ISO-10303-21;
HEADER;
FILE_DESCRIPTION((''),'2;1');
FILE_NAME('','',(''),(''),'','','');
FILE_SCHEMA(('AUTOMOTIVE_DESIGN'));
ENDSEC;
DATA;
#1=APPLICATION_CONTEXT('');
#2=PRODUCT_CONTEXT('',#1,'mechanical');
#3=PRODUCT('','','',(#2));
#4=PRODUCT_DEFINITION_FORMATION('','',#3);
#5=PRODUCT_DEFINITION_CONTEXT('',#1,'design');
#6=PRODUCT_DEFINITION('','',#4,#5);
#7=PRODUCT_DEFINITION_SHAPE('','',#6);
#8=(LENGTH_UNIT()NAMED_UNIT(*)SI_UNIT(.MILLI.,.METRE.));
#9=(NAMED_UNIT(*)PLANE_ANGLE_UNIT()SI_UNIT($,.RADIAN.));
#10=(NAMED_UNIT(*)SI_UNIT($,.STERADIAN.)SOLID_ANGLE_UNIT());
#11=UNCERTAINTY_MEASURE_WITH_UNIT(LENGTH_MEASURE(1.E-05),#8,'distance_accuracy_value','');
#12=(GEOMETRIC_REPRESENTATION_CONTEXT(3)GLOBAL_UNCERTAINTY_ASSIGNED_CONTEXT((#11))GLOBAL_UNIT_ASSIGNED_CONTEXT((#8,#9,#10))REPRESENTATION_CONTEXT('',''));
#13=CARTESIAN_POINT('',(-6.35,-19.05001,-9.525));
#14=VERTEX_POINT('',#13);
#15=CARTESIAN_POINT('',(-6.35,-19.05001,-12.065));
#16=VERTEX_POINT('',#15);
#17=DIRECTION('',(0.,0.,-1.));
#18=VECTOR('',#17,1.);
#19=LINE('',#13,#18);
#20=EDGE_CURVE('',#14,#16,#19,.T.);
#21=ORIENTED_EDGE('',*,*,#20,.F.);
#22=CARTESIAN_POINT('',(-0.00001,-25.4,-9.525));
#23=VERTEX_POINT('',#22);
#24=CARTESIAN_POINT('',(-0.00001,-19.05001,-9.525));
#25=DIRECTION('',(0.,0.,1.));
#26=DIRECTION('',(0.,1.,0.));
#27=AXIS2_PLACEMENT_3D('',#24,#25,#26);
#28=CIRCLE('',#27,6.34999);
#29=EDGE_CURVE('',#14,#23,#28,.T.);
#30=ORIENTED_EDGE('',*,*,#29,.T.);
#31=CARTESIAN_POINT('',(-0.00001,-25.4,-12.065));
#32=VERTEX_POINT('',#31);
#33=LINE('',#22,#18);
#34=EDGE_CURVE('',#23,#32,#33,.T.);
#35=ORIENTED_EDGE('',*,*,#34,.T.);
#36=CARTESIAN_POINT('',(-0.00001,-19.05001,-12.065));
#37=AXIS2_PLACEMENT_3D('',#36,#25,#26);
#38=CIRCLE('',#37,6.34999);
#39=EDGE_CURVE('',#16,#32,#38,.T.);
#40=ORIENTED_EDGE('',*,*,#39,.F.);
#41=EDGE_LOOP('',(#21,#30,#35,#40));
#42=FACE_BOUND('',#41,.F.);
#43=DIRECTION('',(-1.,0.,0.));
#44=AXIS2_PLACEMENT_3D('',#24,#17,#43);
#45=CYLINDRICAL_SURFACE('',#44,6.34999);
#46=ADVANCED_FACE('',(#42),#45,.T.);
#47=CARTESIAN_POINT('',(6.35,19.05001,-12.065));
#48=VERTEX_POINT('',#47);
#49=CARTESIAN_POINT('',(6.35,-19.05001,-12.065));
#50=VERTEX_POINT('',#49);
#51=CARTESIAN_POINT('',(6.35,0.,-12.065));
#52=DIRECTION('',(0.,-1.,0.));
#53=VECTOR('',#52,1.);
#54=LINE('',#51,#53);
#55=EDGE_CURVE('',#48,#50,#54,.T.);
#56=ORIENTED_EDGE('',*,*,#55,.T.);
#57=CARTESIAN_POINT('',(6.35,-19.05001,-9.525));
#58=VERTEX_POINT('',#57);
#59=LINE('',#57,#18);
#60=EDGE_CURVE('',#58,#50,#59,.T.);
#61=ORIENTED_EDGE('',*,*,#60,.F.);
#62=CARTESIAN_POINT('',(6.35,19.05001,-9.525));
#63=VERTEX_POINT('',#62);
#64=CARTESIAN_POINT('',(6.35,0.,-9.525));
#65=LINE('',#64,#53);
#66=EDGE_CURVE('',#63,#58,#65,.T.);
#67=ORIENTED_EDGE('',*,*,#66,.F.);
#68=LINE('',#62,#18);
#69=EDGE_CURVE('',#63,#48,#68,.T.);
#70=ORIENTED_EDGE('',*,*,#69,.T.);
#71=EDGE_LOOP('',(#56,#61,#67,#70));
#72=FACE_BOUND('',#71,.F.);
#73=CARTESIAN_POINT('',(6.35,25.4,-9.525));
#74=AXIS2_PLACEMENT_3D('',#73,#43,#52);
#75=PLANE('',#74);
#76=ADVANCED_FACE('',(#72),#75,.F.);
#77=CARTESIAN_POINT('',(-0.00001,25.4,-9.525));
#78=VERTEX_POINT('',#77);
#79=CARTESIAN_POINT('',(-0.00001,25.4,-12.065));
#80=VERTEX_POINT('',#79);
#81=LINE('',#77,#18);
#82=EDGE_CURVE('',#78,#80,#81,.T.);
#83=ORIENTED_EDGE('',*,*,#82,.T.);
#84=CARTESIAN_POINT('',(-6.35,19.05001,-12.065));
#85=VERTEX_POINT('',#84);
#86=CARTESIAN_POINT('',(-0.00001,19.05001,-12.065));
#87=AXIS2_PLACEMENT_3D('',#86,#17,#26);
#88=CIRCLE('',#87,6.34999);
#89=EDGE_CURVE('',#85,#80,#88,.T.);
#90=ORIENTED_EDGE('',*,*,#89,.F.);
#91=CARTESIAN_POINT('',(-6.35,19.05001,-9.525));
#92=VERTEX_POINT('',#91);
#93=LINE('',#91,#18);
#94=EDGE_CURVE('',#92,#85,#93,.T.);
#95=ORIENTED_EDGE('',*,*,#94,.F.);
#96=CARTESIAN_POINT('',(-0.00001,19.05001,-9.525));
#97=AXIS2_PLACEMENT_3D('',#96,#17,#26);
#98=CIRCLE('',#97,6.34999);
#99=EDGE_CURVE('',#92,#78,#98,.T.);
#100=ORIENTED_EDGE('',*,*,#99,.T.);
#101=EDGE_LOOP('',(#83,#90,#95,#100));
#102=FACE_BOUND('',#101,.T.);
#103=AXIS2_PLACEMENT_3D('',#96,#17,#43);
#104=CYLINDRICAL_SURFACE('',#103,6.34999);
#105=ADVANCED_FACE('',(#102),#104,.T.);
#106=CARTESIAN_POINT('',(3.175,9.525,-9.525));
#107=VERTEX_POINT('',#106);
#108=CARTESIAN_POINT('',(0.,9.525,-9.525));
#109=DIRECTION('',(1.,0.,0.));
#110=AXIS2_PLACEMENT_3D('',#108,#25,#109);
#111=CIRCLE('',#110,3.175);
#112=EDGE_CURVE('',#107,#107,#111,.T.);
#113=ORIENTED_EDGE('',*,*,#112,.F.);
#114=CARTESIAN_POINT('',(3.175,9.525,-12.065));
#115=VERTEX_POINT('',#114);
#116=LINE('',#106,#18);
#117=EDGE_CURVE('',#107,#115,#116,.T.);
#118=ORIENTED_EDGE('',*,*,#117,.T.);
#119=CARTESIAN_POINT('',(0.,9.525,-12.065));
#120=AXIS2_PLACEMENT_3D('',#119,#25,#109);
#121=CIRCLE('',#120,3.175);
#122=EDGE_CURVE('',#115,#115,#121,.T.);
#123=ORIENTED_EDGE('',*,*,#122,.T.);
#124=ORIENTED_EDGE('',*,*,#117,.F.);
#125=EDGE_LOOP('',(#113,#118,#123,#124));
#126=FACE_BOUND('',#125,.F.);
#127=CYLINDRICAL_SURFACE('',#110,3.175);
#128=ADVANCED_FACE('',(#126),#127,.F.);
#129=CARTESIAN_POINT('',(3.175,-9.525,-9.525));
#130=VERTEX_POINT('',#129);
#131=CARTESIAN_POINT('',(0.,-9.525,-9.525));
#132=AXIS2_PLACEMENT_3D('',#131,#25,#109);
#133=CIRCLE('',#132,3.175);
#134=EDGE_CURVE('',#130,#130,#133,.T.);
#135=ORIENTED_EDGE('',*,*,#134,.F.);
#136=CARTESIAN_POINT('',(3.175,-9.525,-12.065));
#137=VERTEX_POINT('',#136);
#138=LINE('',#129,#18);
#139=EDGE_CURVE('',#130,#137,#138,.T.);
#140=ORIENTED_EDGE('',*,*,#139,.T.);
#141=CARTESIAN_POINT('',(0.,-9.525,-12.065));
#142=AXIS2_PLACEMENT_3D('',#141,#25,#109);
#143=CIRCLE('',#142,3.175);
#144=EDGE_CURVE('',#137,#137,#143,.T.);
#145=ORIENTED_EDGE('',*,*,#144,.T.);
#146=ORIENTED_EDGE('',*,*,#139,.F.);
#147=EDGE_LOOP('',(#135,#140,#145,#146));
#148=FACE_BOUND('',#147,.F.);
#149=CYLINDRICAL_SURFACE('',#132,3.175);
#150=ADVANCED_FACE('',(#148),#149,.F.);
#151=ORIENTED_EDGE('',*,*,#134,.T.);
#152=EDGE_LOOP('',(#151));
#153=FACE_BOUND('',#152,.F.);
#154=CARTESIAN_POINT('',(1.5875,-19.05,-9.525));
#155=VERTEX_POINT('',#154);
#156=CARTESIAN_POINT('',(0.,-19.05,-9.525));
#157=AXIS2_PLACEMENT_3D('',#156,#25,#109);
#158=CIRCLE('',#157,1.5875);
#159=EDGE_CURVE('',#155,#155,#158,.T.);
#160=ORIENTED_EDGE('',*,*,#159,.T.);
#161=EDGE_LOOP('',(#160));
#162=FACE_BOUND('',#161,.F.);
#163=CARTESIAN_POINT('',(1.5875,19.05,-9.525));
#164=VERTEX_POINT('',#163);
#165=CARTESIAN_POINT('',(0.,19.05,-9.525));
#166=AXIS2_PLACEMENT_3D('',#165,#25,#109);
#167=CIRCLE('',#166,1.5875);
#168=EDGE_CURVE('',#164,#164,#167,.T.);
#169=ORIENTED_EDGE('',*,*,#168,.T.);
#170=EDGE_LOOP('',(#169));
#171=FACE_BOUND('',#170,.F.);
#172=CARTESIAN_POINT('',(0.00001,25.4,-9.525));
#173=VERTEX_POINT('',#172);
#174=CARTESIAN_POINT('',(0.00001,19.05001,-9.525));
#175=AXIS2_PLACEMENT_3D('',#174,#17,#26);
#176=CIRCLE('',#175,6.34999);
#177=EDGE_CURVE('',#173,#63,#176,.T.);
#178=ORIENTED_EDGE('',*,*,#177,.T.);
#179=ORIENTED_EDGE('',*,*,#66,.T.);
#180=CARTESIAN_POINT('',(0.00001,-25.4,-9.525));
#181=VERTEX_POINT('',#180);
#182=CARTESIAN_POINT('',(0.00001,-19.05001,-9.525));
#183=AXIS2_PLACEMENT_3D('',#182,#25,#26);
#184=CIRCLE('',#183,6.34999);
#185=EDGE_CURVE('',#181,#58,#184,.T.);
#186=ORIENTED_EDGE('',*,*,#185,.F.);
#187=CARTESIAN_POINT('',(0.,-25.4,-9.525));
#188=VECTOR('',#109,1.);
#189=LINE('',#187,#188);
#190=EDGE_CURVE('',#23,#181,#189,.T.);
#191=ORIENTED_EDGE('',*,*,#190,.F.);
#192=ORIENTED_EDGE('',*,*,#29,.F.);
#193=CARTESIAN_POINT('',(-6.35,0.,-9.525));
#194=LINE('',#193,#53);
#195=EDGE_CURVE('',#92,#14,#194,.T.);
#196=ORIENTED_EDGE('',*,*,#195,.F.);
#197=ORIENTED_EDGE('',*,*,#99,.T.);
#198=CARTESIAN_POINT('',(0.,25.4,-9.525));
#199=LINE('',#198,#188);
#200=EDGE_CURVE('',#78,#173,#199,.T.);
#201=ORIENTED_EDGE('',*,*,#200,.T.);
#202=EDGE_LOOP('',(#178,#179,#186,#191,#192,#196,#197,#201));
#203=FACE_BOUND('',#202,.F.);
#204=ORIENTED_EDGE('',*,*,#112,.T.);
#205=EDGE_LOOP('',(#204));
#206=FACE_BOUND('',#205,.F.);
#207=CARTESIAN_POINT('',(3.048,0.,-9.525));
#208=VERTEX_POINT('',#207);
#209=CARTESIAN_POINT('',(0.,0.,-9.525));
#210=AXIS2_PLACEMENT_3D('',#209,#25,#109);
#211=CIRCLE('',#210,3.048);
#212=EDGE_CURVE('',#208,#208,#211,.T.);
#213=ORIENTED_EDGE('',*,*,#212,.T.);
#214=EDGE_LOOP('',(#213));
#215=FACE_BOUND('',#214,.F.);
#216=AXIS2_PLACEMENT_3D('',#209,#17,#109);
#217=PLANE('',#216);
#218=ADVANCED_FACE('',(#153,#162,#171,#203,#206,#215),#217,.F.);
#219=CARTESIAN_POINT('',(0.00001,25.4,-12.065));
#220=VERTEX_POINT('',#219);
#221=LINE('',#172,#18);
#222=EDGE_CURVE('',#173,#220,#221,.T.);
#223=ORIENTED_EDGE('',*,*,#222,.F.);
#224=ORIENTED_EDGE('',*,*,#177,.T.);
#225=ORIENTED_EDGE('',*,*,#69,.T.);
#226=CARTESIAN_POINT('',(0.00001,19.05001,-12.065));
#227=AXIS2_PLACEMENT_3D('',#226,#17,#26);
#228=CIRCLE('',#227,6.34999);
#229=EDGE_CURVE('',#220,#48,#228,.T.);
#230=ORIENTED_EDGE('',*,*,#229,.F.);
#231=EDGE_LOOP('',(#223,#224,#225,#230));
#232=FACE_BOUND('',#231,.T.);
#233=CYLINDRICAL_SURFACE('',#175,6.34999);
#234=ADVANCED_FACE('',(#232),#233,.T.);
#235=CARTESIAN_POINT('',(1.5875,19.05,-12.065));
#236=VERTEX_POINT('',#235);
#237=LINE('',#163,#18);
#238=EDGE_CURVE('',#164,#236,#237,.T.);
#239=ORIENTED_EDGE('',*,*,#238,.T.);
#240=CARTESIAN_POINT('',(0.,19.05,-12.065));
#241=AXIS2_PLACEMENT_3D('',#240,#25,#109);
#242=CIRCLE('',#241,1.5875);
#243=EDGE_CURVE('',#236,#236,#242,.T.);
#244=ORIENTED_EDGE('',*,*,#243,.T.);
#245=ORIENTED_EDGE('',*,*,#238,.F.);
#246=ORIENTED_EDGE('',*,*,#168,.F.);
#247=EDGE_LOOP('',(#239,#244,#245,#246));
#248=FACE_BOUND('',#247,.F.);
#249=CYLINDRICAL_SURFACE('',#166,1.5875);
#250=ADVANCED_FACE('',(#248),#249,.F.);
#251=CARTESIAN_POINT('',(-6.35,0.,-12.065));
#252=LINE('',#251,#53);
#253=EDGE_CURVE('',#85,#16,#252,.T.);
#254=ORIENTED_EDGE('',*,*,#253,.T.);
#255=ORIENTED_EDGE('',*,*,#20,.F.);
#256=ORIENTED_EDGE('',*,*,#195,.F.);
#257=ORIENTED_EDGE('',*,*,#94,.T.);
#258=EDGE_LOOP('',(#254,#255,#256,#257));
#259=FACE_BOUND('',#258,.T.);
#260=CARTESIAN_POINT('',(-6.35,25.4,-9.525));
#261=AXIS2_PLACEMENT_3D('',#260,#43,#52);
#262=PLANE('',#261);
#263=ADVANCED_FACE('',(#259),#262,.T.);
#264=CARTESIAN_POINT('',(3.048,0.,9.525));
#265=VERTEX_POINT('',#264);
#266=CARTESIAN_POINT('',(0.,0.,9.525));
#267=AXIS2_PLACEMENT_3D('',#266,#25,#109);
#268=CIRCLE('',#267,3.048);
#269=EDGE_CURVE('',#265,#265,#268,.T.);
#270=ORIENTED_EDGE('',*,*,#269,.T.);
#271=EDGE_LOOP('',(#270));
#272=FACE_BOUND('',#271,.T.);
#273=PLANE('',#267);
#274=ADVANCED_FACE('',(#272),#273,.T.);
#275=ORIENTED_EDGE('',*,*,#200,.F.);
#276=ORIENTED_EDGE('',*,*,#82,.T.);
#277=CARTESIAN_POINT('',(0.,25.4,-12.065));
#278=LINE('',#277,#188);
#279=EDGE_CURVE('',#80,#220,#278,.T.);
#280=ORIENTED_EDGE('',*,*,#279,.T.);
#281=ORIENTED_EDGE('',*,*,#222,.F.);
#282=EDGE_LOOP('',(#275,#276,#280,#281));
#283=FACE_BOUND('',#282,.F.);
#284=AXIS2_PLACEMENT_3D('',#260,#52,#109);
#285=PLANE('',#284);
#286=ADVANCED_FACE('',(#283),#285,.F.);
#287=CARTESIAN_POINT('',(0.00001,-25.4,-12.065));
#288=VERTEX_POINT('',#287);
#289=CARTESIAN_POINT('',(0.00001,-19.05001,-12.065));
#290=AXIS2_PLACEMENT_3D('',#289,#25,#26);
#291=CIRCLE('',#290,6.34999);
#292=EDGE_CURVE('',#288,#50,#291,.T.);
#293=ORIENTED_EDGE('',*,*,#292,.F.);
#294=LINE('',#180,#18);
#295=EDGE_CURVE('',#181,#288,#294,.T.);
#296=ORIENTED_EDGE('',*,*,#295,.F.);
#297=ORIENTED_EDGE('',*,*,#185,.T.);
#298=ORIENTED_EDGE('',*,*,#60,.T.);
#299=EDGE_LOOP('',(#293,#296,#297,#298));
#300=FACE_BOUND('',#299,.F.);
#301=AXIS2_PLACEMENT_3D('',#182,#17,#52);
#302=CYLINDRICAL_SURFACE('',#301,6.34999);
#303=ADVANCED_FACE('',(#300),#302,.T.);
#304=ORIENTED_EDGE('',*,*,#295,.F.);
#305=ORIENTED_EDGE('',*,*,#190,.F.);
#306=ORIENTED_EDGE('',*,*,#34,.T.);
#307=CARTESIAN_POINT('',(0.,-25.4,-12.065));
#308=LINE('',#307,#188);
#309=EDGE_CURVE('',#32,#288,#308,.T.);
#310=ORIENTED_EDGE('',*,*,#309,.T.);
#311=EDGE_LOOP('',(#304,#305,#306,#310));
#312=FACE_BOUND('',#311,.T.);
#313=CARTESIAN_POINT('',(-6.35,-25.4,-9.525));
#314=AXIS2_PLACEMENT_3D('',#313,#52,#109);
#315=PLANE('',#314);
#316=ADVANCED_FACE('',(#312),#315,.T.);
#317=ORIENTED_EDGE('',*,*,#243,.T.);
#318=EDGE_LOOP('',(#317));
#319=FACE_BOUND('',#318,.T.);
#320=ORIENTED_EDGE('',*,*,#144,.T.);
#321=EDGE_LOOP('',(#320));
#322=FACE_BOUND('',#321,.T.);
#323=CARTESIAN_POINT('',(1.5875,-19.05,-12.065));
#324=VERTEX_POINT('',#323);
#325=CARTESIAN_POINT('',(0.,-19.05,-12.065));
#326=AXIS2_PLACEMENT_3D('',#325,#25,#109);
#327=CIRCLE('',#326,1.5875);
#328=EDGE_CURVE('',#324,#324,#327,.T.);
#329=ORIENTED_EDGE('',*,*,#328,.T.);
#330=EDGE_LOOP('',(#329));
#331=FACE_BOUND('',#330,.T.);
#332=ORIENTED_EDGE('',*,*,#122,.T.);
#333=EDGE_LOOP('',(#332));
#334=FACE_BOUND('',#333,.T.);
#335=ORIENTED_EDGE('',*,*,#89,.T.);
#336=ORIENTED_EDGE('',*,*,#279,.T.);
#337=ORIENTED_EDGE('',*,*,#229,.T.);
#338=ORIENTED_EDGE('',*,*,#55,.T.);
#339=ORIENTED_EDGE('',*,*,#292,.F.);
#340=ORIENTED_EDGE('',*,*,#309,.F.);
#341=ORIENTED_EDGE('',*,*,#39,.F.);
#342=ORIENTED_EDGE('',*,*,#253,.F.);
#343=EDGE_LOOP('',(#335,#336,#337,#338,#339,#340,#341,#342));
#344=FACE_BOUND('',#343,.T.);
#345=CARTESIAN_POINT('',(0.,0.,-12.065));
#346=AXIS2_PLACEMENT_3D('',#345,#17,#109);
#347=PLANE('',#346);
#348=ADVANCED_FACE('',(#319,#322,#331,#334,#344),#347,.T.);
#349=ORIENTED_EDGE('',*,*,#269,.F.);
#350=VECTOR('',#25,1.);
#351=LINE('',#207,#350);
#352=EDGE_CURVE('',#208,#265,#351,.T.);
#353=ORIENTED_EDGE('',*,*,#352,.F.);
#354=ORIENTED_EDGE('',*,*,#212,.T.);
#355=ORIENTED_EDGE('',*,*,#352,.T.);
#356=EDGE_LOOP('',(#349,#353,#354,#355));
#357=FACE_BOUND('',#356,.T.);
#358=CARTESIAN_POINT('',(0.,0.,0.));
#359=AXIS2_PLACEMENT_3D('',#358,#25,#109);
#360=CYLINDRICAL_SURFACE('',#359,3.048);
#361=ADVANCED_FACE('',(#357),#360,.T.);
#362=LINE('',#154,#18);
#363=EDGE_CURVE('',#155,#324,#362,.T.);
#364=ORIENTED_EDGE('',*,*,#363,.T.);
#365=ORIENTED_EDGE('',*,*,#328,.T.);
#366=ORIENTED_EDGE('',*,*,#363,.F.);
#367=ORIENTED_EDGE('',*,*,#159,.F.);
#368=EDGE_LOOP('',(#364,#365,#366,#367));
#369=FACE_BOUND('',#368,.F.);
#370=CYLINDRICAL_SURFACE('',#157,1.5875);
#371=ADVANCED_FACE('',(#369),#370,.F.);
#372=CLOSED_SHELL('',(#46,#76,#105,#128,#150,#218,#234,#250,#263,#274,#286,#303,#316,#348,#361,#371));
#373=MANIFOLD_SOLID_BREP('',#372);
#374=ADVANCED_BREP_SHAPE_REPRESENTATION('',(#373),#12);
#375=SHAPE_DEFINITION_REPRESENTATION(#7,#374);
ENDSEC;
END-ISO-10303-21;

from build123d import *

# Parameters (mm, degrees)
F0_R     = 3.048
F1_DEPTH = 9.525
F2_W     = 12.7
F2_H     = 50.8
F3_DEPTH = 2.54
F4_R     = 6.34999
F5_R     = 1.5875
F5_R_2   = 3.175
F6_DEPTH = 2.541


# Not quite as in the source:
# - a fillet or chamfer is up to 0.001 mm smaller than in the source, because OpenCascade refuses the exact size


with BuildPart() as f1:
    # F0 (on Top) → F1 (new body, symmetric)
    with BuildSketch(Plane.XY):
        Circle(F0_R)
    extrude(amount=F1_DEPTH, both=True)

    # F2 (on face) → F3 (join)
    with BuildSketch(Plane(origin=(0, 0, -9.525), x_dir=(1, 0, 0), z_dir=(0, 0, -1))):
        Rectangle(F2_W, F2_H)
    extrude(amount=F3_DEPTH)

    # F4 (radius 6.35 in the source; OpenCascade refuses exactly that, so slightly less here)
    f4_edges = [f1.edges().sort_by_distance(p)[0] for p in [
        (-6.35, 25.4, -10.795),
        (6.35, 25.4, -10.795),
        (-6.35, -25.4, -10.795),
        (6.35, -25.4, -10.795),
    ]]
    fillet(f4_edges, radius=F4_R)

    # F5 (on face) → F6 (cut, through all)
    with BuildSketch(Plane.XY.offset(-9.525)):
        with Locations((0, 19.05)):
            Circle(F5_R)
        with Locations((0, 9.525)):
            Circle(F5_R_2)
        with Locations((0, -19.05)):
            Circle(F5_R)
        with Locations((0, -9.525)):
            Circle(F5_R_2)
    extrude(amount=-F6_DEPTH, mode=Mode.SUBTRACT)


solid = f1.part
